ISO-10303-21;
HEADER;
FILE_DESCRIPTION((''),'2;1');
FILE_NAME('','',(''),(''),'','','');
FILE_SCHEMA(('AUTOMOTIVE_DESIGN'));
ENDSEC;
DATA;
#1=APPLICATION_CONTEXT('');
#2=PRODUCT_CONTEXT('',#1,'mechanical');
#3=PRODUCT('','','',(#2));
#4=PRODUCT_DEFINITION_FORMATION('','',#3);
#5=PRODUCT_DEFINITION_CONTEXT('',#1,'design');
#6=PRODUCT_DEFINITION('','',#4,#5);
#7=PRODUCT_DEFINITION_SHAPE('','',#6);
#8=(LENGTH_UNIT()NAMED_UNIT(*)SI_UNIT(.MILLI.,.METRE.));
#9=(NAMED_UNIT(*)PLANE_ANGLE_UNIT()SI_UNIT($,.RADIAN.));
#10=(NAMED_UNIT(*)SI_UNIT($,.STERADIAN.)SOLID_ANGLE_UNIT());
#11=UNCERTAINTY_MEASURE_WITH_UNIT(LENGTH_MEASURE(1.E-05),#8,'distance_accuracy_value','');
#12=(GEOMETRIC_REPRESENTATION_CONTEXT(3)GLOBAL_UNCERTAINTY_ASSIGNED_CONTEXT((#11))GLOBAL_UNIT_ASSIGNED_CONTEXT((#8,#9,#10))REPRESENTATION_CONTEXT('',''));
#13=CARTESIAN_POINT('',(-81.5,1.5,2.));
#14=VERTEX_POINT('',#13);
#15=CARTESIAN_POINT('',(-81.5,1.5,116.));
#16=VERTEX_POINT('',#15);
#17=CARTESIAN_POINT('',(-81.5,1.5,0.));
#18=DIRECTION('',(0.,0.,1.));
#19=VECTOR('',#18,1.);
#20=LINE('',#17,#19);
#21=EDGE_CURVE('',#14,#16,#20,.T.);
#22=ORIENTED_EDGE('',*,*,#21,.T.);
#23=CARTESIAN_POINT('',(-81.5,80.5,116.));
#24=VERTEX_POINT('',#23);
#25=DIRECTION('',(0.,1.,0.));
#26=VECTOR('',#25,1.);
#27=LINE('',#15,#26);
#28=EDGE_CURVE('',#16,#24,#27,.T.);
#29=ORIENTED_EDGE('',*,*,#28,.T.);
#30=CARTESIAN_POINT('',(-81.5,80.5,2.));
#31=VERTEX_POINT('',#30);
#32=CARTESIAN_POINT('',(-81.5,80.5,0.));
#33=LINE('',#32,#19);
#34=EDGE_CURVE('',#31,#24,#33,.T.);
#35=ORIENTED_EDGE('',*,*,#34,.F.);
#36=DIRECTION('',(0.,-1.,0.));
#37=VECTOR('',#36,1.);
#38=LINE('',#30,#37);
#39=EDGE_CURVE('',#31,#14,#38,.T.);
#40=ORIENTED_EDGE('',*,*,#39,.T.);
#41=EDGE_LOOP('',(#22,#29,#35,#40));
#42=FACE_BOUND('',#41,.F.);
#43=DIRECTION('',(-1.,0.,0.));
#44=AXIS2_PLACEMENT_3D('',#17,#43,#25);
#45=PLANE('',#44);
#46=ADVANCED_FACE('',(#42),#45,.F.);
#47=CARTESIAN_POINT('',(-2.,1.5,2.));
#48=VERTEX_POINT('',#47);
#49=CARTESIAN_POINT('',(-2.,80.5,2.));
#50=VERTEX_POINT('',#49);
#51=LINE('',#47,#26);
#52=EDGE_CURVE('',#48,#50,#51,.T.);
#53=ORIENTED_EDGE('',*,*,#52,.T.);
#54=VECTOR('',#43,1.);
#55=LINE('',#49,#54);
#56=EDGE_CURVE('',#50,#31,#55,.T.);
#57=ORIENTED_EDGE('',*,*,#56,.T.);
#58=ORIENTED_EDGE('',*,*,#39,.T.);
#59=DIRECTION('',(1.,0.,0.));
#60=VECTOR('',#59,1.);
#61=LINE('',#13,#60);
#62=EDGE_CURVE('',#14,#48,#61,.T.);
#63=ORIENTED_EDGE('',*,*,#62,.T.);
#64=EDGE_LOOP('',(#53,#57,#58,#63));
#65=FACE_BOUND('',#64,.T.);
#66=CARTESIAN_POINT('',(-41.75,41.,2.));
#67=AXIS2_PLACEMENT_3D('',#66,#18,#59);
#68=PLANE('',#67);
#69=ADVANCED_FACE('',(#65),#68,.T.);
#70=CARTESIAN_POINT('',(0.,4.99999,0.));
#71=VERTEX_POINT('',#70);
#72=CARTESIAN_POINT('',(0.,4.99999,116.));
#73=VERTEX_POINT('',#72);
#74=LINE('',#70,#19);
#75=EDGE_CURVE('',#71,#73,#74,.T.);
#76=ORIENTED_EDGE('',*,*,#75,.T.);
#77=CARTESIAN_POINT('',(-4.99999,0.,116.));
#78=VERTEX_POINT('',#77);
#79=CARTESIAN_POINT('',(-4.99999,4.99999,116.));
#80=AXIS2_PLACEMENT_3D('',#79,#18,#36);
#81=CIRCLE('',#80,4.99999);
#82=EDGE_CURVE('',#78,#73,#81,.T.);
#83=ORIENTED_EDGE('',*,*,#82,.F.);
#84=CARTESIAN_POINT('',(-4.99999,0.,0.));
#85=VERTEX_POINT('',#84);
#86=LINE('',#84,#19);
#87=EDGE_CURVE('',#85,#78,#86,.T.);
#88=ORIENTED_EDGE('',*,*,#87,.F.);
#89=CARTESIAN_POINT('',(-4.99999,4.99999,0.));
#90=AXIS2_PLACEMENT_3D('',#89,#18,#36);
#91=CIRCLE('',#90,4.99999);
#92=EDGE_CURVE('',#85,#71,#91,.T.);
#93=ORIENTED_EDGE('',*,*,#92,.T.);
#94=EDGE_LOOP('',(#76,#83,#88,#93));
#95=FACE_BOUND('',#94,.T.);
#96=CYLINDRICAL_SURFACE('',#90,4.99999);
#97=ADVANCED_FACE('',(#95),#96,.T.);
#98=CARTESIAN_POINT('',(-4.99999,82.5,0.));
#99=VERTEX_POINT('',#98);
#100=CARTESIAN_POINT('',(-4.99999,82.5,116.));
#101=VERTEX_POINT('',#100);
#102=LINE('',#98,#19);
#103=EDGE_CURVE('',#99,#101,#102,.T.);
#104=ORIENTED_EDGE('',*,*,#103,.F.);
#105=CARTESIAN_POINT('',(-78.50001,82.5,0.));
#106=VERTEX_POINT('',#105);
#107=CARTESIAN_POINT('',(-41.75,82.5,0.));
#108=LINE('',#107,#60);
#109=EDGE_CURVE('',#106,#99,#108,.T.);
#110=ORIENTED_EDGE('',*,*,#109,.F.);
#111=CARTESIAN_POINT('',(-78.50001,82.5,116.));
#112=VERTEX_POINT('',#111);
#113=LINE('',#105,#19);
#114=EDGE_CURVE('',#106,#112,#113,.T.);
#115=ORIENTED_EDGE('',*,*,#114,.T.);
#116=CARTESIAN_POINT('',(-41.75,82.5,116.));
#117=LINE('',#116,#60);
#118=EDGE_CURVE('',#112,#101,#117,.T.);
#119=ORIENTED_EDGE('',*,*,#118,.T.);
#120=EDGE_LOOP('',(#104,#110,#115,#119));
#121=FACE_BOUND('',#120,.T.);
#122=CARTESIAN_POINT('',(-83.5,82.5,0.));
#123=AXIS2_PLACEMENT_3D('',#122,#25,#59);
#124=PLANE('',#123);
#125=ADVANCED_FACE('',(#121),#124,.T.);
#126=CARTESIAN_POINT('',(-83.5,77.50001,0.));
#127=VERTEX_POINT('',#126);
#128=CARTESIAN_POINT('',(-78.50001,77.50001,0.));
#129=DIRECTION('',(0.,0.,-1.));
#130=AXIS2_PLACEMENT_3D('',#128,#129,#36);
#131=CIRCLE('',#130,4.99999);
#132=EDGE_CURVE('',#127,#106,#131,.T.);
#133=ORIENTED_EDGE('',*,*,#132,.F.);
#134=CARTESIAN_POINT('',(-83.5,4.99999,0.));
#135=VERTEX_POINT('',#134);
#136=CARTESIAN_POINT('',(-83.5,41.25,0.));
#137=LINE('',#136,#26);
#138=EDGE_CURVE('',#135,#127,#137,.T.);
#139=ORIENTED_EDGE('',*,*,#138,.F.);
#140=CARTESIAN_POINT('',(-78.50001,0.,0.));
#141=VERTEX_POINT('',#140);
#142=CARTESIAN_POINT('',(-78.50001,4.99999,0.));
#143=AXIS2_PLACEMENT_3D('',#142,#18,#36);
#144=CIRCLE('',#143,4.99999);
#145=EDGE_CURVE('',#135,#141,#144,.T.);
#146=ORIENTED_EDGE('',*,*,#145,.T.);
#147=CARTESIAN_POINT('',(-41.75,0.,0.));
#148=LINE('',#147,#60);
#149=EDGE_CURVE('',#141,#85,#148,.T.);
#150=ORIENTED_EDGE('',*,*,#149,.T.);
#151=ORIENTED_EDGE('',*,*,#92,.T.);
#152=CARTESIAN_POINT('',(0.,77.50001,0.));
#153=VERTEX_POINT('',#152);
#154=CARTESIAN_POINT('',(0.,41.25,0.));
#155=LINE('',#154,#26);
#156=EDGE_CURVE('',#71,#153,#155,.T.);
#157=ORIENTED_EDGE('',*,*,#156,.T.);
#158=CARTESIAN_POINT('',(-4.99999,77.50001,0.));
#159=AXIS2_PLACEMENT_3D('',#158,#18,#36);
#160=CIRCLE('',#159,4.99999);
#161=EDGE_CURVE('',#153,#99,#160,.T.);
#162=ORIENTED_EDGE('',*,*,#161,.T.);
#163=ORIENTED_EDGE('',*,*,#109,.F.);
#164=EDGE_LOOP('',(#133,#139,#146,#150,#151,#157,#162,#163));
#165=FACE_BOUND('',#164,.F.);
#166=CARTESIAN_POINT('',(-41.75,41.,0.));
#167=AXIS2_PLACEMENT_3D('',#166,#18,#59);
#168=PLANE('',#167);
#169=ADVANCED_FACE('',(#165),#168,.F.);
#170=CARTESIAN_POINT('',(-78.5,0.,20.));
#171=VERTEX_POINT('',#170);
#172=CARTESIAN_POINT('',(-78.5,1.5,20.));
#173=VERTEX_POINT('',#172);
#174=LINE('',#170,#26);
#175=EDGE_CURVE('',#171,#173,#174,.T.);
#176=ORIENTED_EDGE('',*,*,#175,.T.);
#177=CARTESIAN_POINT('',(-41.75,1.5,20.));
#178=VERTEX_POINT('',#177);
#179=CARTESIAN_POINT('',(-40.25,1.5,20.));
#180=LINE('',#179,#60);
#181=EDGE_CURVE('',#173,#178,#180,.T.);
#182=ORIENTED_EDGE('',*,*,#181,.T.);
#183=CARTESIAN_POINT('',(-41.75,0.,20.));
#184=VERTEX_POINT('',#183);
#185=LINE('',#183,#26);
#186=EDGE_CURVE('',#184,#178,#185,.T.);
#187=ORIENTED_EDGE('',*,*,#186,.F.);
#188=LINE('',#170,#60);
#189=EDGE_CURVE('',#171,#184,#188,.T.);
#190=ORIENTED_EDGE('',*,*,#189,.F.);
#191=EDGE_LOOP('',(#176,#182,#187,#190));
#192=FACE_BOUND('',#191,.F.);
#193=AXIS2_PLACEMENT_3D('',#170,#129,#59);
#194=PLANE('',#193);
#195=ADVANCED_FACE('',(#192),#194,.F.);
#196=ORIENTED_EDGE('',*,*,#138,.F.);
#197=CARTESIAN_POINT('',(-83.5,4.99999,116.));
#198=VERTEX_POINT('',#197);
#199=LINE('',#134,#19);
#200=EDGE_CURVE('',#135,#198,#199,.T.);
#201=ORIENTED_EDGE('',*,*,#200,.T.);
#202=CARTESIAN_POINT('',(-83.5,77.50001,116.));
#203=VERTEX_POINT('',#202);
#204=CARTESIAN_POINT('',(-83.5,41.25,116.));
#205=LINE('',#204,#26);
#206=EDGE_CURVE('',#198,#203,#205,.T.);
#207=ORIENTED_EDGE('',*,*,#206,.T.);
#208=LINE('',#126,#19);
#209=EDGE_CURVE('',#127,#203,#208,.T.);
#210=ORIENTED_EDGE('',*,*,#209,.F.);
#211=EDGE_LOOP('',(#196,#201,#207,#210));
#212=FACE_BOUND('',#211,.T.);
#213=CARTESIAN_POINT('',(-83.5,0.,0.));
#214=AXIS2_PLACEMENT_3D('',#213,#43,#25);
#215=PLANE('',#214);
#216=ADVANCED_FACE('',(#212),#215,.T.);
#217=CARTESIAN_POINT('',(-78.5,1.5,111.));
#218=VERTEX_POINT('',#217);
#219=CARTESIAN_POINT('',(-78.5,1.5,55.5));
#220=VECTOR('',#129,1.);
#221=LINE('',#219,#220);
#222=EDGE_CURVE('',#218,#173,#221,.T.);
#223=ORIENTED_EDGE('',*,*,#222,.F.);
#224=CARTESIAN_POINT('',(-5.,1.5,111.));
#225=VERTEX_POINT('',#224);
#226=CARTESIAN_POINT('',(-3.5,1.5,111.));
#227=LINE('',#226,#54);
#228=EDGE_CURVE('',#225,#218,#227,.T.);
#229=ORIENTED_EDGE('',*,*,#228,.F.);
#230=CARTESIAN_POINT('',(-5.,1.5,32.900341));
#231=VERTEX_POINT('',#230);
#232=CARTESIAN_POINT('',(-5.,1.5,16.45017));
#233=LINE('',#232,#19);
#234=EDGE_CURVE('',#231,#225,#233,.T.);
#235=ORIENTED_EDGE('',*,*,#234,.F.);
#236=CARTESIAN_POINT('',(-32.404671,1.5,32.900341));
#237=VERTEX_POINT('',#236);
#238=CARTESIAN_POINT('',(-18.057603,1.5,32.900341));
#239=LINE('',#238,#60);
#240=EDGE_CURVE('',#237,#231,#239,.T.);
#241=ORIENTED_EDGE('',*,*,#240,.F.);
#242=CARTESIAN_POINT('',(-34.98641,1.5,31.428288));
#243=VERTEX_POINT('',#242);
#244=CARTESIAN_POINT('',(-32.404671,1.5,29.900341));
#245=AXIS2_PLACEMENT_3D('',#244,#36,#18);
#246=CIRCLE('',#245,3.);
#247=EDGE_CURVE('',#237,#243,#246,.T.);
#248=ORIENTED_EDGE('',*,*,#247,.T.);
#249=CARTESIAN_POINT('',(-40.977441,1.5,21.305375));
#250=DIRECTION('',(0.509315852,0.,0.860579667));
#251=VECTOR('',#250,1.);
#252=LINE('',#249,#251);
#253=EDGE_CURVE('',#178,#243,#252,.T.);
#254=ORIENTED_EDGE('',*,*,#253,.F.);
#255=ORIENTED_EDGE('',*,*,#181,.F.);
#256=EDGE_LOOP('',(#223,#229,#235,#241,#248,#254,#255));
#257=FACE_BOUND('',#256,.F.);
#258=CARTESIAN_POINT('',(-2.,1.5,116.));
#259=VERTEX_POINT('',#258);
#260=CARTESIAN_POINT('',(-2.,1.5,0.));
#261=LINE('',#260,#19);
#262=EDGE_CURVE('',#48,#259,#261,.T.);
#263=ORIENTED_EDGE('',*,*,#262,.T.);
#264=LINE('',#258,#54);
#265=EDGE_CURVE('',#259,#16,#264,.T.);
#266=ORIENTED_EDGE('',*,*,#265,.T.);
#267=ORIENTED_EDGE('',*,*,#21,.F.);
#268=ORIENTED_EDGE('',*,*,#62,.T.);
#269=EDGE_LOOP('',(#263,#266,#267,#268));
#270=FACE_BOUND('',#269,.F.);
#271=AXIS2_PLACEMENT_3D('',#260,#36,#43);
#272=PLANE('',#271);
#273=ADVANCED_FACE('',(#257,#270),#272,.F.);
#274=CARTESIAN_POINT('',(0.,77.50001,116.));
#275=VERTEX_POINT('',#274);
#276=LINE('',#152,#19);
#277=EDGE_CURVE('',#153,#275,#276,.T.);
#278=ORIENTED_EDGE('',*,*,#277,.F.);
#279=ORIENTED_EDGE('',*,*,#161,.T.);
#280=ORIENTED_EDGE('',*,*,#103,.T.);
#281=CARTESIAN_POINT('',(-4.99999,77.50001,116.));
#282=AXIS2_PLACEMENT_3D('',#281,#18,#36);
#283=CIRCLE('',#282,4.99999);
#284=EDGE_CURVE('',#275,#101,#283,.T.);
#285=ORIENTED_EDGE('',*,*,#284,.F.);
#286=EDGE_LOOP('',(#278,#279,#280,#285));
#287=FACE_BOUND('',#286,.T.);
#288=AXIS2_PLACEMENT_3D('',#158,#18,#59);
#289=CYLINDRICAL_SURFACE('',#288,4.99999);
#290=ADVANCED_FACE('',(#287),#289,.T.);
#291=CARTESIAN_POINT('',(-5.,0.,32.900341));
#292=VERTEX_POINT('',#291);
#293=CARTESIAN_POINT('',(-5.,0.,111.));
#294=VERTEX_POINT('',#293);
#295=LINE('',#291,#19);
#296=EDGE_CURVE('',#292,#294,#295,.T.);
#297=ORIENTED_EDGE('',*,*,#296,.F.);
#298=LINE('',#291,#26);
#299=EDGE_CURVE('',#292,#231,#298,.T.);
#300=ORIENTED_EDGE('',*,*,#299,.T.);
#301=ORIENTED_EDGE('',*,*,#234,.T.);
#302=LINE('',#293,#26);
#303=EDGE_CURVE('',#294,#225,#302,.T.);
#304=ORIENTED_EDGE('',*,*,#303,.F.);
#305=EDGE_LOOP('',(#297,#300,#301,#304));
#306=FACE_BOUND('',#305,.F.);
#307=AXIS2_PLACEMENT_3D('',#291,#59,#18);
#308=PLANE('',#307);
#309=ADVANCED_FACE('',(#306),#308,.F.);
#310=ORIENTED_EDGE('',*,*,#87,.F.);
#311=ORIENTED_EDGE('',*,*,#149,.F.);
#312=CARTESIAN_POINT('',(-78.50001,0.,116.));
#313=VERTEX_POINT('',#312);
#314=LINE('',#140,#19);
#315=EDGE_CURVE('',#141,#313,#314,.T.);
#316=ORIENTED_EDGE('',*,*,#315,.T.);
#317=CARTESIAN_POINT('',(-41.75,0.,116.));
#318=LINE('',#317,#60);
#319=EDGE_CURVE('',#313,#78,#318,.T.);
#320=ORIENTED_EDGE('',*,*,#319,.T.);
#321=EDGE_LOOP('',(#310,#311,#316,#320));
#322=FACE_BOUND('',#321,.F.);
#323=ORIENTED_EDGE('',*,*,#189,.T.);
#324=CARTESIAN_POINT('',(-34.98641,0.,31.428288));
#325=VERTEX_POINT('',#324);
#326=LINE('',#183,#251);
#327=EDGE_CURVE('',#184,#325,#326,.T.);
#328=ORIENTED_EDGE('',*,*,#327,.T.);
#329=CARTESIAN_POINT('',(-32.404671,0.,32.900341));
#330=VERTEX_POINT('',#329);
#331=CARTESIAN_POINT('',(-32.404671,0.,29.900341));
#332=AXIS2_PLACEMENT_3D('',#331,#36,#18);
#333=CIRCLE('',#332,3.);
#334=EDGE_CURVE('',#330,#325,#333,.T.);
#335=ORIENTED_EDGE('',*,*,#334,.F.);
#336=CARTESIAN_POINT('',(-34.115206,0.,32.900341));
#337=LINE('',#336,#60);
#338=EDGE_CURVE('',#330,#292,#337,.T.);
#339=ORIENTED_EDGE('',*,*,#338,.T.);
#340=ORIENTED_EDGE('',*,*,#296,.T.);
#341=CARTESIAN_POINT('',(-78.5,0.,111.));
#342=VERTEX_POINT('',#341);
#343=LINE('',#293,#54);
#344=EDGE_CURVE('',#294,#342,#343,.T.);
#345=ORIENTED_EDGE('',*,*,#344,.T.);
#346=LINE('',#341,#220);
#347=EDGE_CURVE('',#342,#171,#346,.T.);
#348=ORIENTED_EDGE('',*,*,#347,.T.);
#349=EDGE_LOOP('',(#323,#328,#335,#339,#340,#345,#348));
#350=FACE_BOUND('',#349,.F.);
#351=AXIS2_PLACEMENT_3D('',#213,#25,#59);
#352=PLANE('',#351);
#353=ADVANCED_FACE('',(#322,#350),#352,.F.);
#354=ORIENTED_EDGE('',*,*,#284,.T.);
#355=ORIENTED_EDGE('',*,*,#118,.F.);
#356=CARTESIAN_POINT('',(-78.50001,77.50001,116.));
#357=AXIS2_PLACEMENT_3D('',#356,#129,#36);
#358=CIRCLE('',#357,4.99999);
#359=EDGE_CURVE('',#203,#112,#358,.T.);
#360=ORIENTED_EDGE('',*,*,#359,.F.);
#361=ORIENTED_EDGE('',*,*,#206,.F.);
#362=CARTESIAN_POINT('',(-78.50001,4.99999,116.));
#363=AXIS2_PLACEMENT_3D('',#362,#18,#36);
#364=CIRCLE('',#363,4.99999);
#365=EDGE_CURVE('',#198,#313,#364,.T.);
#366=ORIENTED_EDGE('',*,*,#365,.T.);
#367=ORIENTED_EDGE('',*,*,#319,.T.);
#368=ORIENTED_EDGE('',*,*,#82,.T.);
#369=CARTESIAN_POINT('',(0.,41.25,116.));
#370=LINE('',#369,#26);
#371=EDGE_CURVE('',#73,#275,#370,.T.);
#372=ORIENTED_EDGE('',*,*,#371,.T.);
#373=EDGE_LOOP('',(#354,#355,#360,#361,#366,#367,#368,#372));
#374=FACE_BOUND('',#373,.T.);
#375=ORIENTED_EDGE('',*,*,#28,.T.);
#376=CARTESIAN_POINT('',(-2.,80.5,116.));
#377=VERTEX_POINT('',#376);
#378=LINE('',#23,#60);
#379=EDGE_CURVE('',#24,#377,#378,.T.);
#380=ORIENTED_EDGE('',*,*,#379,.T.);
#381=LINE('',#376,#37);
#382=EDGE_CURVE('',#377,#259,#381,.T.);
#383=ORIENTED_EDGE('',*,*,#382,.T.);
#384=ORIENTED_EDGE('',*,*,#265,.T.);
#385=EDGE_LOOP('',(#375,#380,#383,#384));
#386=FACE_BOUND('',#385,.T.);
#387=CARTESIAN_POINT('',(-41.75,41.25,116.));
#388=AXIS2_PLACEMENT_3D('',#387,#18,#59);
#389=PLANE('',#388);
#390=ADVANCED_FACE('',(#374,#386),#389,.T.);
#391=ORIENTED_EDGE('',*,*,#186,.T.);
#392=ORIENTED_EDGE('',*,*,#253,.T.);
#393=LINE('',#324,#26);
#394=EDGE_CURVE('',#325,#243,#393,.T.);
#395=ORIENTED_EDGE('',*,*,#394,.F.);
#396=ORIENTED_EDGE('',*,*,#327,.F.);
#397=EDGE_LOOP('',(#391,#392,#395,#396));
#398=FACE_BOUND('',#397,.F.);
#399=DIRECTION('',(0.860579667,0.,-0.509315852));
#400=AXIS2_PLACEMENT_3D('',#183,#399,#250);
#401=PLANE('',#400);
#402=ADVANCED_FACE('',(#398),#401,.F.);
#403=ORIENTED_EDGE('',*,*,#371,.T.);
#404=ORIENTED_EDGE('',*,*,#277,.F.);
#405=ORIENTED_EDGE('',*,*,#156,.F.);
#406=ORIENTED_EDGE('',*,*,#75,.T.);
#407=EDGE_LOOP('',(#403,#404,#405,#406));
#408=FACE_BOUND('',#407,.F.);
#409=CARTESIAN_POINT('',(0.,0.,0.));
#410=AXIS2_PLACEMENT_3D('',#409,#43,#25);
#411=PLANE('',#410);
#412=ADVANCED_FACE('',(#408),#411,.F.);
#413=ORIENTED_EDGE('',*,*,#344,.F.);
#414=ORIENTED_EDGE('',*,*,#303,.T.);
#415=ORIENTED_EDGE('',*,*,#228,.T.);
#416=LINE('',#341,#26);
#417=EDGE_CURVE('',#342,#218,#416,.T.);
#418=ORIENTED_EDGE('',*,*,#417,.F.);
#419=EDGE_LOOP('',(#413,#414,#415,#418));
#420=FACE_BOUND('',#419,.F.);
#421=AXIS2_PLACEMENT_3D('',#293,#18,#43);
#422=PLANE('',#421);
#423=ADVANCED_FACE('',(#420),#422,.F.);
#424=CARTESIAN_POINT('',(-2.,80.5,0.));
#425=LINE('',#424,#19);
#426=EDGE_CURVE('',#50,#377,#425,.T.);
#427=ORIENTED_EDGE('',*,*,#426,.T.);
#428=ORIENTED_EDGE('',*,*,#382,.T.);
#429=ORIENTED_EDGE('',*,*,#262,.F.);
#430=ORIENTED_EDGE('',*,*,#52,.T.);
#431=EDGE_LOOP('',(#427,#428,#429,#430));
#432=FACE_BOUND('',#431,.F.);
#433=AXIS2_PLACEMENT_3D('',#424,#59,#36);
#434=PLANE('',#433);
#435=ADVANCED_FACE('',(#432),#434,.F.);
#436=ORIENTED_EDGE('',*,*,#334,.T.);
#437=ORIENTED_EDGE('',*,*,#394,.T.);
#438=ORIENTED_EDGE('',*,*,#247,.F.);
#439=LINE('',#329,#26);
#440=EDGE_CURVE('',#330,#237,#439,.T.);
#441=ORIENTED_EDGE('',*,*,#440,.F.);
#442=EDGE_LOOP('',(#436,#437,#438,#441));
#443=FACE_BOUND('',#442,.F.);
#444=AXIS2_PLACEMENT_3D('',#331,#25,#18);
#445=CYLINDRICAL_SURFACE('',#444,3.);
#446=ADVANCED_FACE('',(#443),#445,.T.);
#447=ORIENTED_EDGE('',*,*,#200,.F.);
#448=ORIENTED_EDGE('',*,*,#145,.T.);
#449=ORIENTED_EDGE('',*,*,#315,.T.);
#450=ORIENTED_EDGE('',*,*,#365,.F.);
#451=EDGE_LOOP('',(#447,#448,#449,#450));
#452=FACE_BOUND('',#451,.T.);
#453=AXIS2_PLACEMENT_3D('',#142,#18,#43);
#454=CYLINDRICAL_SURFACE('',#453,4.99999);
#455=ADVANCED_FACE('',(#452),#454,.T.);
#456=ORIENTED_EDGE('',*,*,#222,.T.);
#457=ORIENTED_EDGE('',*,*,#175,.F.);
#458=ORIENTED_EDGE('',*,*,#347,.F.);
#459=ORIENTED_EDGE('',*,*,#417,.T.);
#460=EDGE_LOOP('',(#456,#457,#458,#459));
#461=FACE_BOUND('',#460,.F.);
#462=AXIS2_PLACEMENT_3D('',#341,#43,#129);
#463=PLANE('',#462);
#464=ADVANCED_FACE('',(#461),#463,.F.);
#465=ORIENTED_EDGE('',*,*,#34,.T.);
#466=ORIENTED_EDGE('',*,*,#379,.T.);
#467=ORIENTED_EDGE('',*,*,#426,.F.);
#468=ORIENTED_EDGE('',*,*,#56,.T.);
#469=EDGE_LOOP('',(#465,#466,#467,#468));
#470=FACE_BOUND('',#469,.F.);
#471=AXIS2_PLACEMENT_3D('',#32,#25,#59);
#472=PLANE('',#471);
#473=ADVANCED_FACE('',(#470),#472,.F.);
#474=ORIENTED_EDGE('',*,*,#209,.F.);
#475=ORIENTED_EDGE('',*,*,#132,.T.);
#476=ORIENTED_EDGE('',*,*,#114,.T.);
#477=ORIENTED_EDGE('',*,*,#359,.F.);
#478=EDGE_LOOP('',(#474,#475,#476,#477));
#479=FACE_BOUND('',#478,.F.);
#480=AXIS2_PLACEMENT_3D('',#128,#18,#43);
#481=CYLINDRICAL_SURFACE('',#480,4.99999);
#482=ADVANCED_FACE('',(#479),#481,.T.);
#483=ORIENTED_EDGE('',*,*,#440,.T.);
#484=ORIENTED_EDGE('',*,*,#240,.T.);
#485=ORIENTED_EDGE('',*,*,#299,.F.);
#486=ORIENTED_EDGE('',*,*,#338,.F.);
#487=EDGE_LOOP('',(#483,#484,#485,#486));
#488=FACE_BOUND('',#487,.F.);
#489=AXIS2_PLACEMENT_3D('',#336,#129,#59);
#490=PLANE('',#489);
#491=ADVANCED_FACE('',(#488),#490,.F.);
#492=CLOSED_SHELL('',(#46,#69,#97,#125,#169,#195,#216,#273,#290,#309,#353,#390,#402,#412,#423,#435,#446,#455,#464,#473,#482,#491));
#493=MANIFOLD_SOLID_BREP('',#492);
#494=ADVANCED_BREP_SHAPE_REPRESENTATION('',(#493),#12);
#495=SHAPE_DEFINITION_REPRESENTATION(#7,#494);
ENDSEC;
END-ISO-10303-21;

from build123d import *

# Parameters (mm, degrees)
F0_W     = 83.5
F0_H     = 82.5
F1_DEPTH = 116
F3_DEPTH = 25
F4_R     = 3
F5_DEPTH = 2
F6_R     = 4.99999


# Not quite as in the source:
# - a fillet or chamfer is up to 0.001 mm smaller than in the source, because OpenCascade refuses the exact size


with BuildPart() as f1:
    # F0 (on Top) → F1 (new body)
    with BuildSketch(Plane.XY):
        with Locations((-41.75, 41.25)):
            Rectangle(F0_W, F0_H)
        Polygon((-2, 1.5), (-43.8047535717, 1.5), (-81.5, 1.5), (-81.5, 41.25), (-81.5, 80.5), (-41.75, 80.5), (-2, 80.5), (-2, 41.25), align=None, mode=Mode.SUBTRACT)
    extrude(amount=F1_DEPTH)

    # F2 (on Front) → F3 (cut)
    with BuildSketch(Plane.XZ):
        Polygon((-5, 111), (-78.5, 111), (-78.5, 20), (-41.75, 20), (-34.1152064502, 32.9003408551), (-5, 32.9003408551), align=None)
    extrude(amount=-F3_DEPTH, mode=Mode.SUBTRACT)

    # F4
    f4_edges = [f1.edges().sort_by_distance(p)[0] for p in [
        (-34.115206, 0.75, 32.900341),
    ]]
    fillet(f4_edges, radius=F4_R)

    # F0 (on Top) → F5 (join)
    with BuildSketch(Plane.XY):
        Polygon((-81.5, 1.5), (-43.8047535717, 1.5), (-2, 1.5), (-2, 41.25), (-2, 80.5), (-41.75, 80.5), (-81.5, 80.5), (-81.5, 41.25), align=None)
    extrude(amount=F5_DEPTH)

    # F6 (radius 5 in the source; OpenCascade refuses exactly that, so slightly less here)
    f6_edges = [f1.edges().sort_by_distance(p)[0] for p in [
        (-83.5, 0, 58),
        (0, 0, 58),
        (0, 82.5, 58),
        (-83.5, 82.5, 58),
    ]]
    fillet(f6_edges, radius=F6_R)


solid = f1.part
